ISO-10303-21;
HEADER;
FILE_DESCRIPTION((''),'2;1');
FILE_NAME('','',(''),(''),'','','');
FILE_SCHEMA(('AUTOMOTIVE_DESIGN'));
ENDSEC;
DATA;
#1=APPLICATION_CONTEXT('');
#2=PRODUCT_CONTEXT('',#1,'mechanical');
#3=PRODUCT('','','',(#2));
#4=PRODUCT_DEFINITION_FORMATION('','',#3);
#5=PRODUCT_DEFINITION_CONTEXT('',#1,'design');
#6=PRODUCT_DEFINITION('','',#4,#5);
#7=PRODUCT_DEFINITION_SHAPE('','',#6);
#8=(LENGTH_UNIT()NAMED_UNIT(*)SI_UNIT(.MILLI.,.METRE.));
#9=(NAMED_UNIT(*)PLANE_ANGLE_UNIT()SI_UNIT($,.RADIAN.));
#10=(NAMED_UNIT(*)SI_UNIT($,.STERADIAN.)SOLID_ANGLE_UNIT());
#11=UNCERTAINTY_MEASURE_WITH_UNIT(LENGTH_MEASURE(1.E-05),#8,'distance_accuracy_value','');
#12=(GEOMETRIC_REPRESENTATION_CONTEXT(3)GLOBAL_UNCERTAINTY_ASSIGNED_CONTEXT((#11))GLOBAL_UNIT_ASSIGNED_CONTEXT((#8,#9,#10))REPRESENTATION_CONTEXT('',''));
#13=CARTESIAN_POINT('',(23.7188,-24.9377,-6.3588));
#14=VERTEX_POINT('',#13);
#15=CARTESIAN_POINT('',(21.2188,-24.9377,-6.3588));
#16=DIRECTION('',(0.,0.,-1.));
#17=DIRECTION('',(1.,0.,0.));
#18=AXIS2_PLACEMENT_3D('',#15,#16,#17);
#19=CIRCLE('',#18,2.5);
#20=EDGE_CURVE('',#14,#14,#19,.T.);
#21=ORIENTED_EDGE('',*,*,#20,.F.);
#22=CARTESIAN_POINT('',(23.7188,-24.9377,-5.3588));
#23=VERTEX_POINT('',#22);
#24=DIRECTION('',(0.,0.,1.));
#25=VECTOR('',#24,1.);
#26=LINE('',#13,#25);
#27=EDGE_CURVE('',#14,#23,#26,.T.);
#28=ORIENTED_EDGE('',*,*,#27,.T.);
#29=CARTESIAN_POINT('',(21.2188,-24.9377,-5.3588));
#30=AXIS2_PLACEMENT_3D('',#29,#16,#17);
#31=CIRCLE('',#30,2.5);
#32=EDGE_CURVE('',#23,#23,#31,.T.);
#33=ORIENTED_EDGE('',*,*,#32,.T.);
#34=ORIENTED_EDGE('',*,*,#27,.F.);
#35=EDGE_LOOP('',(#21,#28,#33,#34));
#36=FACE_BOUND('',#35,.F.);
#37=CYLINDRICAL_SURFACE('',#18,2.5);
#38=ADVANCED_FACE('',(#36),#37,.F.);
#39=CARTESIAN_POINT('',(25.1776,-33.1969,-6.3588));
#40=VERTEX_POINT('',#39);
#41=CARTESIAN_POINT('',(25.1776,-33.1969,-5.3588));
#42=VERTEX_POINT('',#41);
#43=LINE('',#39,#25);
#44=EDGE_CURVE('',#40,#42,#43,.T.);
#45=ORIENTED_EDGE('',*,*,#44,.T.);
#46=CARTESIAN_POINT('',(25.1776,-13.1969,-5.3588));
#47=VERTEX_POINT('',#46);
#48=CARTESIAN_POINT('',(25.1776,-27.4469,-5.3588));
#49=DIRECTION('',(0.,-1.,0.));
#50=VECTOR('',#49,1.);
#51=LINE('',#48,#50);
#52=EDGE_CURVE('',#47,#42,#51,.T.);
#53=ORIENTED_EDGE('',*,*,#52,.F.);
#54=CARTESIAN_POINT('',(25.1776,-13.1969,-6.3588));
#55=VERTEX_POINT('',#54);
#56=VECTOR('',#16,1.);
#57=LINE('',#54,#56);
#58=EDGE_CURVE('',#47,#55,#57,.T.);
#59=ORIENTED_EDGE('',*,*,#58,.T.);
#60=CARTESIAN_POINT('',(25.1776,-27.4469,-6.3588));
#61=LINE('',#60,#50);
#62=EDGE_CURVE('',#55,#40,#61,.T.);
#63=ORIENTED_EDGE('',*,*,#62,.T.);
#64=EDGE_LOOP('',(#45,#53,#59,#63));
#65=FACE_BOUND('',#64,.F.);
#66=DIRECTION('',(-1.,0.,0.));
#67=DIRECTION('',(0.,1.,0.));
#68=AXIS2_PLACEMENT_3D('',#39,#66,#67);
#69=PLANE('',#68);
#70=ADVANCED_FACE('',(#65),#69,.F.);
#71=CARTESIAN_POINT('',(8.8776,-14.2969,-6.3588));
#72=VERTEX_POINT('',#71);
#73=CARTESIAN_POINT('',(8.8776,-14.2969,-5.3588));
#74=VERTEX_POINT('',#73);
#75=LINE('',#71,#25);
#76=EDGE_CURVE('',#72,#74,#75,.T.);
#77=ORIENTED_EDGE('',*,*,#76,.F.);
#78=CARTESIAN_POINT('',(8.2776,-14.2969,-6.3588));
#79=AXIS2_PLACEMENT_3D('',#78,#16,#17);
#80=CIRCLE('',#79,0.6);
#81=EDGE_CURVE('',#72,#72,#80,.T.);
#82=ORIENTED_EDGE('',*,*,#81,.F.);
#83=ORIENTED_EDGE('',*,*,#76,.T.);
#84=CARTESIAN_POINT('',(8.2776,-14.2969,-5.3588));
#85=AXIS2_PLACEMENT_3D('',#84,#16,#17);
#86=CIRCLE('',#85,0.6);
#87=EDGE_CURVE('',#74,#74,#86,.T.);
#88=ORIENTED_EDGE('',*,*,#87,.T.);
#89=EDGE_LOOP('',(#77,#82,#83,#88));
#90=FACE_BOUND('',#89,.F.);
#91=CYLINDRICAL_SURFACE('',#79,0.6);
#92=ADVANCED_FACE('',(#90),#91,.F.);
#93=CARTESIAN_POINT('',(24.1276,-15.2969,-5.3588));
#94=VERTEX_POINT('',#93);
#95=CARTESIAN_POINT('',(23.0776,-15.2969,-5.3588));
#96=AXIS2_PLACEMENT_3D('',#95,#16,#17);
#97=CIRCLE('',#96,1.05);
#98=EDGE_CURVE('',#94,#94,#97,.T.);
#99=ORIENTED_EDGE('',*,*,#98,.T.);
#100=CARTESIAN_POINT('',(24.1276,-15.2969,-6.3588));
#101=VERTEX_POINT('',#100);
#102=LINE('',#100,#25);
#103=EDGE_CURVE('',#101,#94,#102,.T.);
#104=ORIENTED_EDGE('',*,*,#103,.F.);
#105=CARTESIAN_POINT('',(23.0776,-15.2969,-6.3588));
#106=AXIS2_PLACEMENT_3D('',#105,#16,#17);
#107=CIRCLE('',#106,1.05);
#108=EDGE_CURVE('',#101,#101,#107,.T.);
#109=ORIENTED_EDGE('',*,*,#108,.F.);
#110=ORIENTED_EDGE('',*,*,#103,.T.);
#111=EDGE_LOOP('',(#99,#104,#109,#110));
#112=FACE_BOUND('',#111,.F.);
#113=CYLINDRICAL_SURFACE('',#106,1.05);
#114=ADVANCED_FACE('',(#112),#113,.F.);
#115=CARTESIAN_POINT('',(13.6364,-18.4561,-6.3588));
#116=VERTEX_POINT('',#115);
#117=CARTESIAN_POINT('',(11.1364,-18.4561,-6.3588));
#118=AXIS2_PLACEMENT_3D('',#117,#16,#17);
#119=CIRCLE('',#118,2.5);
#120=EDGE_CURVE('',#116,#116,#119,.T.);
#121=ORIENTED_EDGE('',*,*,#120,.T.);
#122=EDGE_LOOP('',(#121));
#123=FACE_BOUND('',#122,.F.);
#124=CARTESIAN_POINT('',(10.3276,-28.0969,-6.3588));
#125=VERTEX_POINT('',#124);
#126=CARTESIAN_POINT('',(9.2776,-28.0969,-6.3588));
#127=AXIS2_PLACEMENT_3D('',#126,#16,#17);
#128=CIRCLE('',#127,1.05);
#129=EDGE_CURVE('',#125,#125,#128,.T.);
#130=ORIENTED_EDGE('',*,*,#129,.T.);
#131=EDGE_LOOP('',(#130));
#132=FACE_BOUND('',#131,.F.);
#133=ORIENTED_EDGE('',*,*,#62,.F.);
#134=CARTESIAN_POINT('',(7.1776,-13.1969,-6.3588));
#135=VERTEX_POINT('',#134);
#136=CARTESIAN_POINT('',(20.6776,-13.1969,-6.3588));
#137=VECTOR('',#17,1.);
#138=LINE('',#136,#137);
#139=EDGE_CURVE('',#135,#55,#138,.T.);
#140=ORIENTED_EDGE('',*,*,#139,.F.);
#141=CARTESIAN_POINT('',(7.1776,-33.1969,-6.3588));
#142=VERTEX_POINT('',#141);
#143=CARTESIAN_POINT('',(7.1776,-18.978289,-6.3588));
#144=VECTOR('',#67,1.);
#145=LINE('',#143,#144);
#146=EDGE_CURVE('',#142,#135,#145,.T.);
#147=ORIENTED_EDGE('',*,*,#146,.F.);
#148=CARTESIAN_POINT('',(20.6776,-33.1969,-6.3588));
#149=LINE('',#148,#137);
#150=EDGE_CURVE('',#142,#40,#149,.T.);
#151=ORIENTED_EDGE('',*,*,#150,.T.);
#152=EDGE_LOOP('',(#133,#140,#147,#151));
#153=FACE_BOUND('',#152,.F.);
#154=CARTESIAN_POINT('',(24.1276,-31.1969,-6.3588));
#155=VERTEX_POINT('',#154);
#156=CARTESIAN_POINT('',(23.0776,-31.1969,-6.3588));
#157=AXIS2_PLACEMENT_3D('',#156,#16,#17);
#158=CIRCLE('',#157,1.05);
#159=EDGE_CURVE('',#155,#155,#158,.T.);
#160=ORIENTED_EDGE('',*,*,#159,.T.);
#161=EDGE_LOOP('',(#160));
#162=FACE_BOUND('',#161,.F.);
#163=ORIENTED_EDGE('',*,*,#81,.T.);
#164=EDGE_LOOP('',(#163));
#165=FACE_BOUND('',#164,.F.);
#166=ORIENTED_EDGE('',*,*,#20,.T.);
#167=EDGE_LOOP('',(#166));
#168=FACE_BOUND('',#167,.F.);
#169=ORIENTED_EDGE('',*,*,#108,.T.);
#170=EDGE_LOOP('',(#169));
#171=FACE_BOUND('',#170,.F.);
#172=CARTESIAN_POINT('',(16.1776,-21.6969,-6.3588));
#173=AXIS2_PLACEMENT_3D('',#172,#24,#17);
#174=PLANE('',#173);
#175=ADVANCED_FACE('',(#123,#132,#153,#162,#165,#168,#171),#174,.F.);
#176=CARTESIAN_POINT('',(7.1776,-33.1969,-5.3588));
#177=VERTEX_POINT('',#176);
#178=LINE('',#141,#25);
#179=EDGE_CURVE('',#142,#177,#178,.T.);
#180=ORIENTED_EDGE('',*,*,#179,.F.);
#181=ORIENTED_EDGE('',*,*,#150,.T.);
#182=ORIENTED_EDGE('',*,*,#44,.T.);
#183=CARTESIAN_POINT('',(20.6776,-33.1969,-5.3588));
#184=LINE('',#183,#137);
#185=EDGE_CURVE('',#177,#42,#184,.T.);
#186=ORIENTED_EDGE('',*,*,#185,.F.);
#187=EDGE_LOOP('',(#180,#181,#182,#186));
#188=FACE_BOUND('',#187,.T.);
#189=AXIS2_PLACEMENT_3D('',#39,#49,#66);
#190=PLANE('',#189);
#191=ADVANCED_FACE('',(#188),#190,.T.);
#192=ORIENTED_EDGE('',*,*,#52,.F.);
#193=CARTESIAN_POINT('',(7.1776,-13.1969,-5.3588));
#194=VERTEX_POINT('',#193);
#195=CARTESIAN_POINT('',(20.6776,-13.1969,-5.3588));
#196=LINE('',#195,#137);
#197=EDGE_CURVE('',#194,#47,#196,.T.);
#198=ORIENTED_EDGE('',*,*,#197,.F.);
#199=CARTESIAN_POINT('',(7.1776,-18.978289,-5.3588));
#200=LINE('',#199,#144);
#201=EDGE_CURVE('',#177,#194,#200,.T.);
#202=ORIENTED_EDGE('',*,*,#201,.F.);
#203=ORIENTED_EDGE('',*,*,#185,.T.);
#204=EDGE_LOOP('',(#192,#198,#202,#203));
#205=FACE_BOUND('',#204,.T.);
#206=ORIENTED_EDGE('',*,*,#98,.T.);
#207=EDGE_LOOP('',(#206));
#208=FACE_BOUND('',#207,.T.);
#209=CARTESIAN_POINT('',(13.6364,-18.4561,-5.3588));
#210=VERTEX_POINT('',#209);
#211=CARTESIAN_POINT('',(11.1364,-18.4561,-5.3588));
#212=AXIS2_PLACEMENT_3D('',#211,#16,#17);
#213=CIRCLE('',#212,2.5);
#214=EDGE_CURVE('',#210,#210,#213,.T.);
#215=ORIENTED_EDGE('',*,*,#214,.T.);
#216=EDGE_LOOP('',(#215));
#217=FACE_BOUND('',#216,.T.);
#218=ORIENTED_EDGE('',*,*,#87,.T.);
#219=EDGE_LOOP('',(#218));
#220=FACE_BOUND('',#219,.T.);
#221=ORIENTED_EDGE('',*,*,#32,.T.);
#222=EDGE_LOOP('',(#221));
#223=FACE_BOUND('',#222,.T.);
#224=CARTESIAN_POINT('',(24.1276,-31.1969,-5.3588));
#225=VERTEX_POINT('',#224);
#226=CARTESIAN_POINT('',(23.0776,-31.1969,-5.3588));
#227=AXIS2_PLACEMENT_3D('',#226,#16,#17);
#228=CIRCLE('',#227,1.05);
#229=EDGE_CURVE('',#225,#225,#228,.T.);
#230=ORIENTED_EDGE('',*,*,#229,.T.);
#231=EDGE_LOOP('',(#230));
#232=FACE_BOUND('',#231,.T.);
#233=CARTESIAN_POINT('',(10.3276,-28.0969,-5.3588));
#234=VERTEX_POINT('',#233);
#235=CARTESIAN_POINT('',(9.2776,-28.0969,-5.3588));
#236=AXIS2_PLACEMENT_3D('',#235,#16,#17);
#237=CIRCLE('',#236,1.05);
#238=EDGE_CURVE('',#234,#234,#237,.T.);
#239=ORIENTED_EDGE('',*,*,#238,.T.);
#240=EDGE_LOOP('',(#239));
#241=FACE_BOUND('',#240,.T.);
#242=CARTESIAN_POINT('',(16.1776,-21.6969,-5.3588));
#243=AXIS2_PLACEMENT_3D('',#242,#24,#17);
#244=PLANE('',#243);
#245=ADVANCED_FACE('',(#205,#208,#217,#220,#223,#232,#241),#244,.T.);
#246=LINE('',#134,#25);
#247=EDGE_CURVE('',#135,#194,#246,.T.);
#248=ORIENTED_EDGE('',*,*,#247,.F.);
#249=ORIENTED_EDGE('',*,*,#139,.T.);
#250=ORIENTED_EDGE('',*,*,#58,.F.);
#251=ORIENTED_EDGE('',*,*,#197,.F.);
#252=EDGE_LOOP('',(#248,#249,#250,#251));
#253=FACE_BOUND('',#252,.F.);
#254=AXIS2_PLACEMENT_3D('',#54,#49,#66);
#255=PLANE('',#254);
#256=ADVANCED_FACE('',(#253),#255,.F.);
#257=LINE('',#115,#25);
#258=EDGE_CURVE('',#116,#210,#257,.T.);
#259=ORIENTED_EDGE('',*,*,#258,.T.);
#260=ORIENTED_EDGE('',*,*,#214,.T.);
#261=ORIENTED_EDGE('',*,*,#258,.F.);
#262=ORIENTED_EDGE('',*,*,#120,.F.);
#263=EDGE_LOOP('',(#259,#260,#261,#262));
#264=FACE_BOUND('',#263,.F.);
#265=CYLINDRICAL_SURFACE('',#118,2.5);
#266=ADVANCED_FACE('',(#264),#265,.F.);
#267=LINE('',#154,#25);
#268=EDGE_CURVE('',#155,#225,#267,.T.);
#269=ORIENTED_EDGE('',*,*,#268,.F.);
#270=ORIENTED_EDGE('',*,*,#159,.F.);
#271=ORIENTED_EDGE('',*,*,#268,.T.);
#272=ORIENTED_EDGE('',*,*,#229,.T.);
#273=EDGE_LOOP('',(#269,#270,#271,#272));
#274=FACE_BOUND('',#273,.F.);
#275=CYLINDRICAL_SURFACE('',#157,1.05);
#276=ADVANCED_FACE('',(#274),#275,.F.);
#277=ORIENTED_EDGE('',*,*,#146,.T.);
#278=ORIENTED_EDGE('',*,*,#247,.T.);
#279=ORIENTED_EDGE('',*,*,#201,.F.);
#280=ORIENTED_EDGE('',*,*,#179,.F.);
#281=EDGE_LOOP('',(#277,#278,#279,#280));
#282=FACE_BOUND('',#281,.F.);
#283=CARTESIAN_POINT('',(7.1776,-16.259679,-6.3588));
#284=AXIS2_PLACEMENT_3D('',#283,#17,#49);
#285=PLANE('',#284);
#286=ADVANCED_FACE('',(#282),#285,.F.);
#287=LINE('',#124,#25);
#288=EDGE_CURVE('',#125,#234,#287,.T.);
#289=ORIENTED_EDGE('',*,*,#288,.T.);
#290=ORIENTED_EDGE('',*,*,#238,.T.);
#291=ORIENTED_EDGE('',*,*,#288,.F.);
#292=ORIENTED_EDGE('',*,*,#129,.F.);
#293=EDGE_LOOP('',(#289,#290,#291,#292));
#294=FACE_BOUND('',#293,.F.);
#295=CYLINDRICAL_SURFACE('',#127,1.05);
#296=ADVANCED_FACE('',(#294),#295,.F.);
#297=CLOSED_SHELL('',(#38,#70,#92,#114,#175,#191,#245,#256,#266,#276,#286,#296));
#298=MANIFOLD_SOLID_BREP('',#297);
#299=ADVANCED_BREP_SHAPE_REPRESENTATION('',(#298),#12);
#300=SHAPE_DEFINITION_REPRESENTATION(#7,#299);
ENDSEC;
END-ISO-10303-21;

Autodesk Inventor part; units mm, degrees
ref_plane "YZ Plane" through (0, 0, 0) normal (1, 0, 0) x (0, 1, 0)
ref_plane "XZ Plane" through (0, 0, 0) normal (0, 1, 0) x (-1, 0, 0)
ref_plane "Work Plane1" through (-8, -18, 2.25) normal (0, 0, 1) x (1, 0, 0)
ref_plane "Work Plane2" through (16.1776, -21.6969, -6.3588) normal (0, 0, 1) x (1, 0, 0)
sketch "Sketch6" plane through (16.1776, -21.6969, -6.3588) normal (0, 0, 1) x (1, 0, 0)
  circle A0 centre (6.9, -9.5) radius 1.2 projected
  circle A1 centre (-6.9, -6.4) radius 1.2 projected
  circle A2 centre (6.9, 6.4) radius 1.2 projected
  circle A3 centre (-7.9, 7.4) radius 0.4 projected
  line L0 (4.2, -7) -> (-1.2, -7) projected
  arc A4 (-8.5, 0.3) -> (-1.2, -7) centre (-1.2, 0.3) ccw projected
  line L1 (-8.5, 0.3) -> (-8.5, 2.7) projected
  arc A5 (-4.2, 7) -> (-8.5, 2.7) centre (-4.2, 2.7) ccw projected
  line L2 (-4.2, 7) -> (1.2, 7) projected
  arc A6 (8.5, -0.3) -> (1.2, 7) centre (1.2, -0.3) ccw projected
  line L3 (8.5, -0.3) -> (8.5, -2.7) projected
  arc A7 (4.2, -7) -> (8.5, -2.7) centre (4.2, -2.7) ccw projected
  line L4 (-4.2738, -7.5) -> (-4.2738, -24.5) projected
  line L5 (-4.2738, -7.5) -> (4.2738, -7.5) projected
  line L6 (4.2738, -24.5) -> (4.2738, -7.5) projected
  line L7 (9, -24.5) -> (4.2738, -24.5) projected
  line L8 (9, -24.5) -> (9, 8.5) projected
  line L9 (9, 8.5) -> (-9, 8.5) projected
  line L10 (-9, 8.5) -> (-9, -24.5) projected
  line L11 (-4.2738, -24.5) -> (-9, -24.5) projected
  line L12 (1.2, 6.2) -> (-4.2, 6.2) projected
  arc A8 (-4.2, 6.2) -> (-7.7, 2.7) centre (-4.2, 2.7) ccw projected
  line L13 (-7.7, 2.7) -> (-7.7, 0.3) projected
  arc A9 (-7.7, 0.3) -> (-1.2, -6.2) centre (-1.2, 0.3) ccw projected
  line L14 (-1.2, -6.2) -> (4.2, -6.2) projected
  arc A10 (4.2, -6.2) -> (7.7, -2.7) centre (4.2, -2.7) ccw projected
  line L15 (7.7, -2.7) -> (7.7, -0.3) projected
  arc A11 (7.7, -0.3) -> (1.2, 6.2) centre (1.2, -0.3) ccw projected
  line L16 (-7.2, 0.3) -> (-7.2, 2.7) projected
  arc A12 (-4.2, 5.7) -> (-7.2, 2.7) centre (-4.2, 2.7) ccw projected
  line L17 (-4.2, 5.7) -> (1.2, 5.7) projected
  arc A13 (7.2, -0.3) -> (1.2, 5.7) centre (1.2, -0.3) ccw projected
  line L18 (7.2, -0.3) -> (7.2, -2.7) projected
  arc A14 (4.2, -5.7) -> (7.2, -2.7) centre (4.2, -2.7) ccw projected
  line L19 (4.2, -5.7) -> (-1.2, -5.7) projected
  arc A15 (-7.2, 0.3) -> (-1.2, -5.7) centre (-1.2, 0.3) ccw projected
  line L20 (8.5, -0.3) -> (8.5, -2.7) projected
  arc A16 (8.5, -0.3) -> (1.2, 7) centre (1.2, -0.3) ccw projected
  line L21 (-4.2, 7) -> (1.2, 7) projected
  arc A17 (-4.2, 7) -> (-8.5, 2.7) centre (-4.2, 2.7) ccw projected
  line L22 (-8.5, 0.3) -> (-8.5, 2.7) projected
  arc A18 (-8.5, 0.3) -> (-1.2, -7) centre (-1.2, 0.3) ccw projected
  line L23 (4.2, -7) -> (-1.2, -7) projected
  arc A19 (4.2, -7) -> (8.5, -2.7) centre (4.2, -2.7) ccw projected
  arc A20 (-4.2, 6.2) -> (-7.7, 2.7) centre (-4.2, 2.7) ccw projected
  line L24 (1.2, 6.2) -> (-4.2, 6.2) projected
  arc A21 (7.7, -0.3) -> (1.2, 6.2) centre (1.2, -0.3) ccw projected
  line L25 (7.7, -2.7) -> (7.7, -0.3) projected
  arc A22 (4.2, -6.2) -> (7.7, -2.7) centre (4.2, -2.7) ccw projected
  line L26 (-1.2, -6.2) -> (4.2, -6.2) projected
  arc A23 (-7.7, 0.3) -> (-1.2, -6.2) centre (-1.2, 0.3) ccw projected
  line L27 (-7.7, 2.7) -> (-7.7, 0.3) projected
  line L28 (-1.4516, 1.7) -> (-0.5158, 1.7) projected
  arc A24 (2.07, 0.2211) -> (-0.5158, 1.7) centre (-0.5158, -1.3) ccw projected
  line L29 (2.07, 0.2211) -> (2.3135, -0.193) projected
  arc A25 (1.4516, -1.7) -> (2.3135, -0.193) centre (1.4516, -0.7) ccw projected
  line L30 (1.4516, -1.7) -> (0.5158, -1.7) projected
  arc A26 (-2.07, -0.2211) -> (0.5158, -1.7) centre (0.5158, 1.3) ccw projected
  line L31 (-2.07, -0.2211) -> (-2.3135, 0.193) projected
  arc A27 (-1.4516, 1.7) -> (-2.3135, 0.193) centre (-1.4516, 0.7) ccw projected
  arc A28 (-7.2, 0.3) -> (-1.2, -5.7) centre (-1.2, 0.3) ccw projected
  line L32 (-1.2, -5.7) -> (4.2, -5.7) projected
  arc A29 (4.2, -5.7) -> (7.2, -2.7) centre (4.2, -2.7) ccw projected
  line L33 (7.2, -2.7) -> (7.2, -0.3) projected
  arc A30 (7.2, -0.3) -> (1.2, 5.7) centre (1.2, -0.3) ccw projected
  line L34 (1.2, 5.7) -> (-4.2, 5.7) projected
  arc A31 (-4.2, 5.7) -> (-7.2, 2.7) centre (-4.2, 2.7) ccw projected
  line L35 (-7.2, 2.7) -> (-7.2, 0.3) projected
  line L36 (-9, 8.5) -> (9, 8.5)
  line L37 (9, 8.5) -> (9, -11.5)
  line L38 (9, -11.5) -> (-9, -11.5)
  line L39 (-9, -11.5) -> (-9, 8.5)
  circle A32 centre (-6.9, -6.4) radius 1.05
  circle A33 centre (6.9, -9.5) radius 1.05
  circle A34 centre (6.9, 6.4) radius 1.05
  circle A35 centre (-7.9, 7.4) radius 0.6
  circle A36 centre (-7.9, 7.4) radius 2.25
  line L40 (-4.2, 2.7) -> (4.2, -2.7)
  line L41 (-4.2, 2.7) -> (-5.0412, 3.2408)
  line L42 (4.2, -2.7) -> (5.0412, -3.2408)
  circle A37 centre (-5.0412, 3.2408) radius 2.5
  circle A38 centre (5.0412, -3.2408) radius 2.5
  point P0 (-16.1776, 21.6969)
  point P1 (-9, -11.5)
  dimension "d36" = 20
  dimension "d37" = 2.1
  dimension "d38" = 2.1
  dimension "d39" = 2.1
  dimension "d40" = 1.2
  dimension "d41" = 4.5
  dimension "d42" = 1
  dimension "d43" = 1
  dimension "d44" = 5
  dimension "d45" = 5
extrude "Extrusion4" add sketch "Sketch6" along normal blind 3 contours A0 | A1 | A2 | A7 L3 A6 L2 A5 A36 L9 L8 L38 L6 L5 L4 L10 L1 A4 L0 | L0 A4 L1 A5 A36 L2 A6 L3 A7 | A36 L10 L9 A5 | A5 A36 | L4 L5 L6 L38 | A11 L15 A10 A38 L18 A13 L17 A12 A37 A8 L12 | A37 L16 A15 L19 A14 A38 A10 L14 A9 L13 A8 | A12 L17 A13 L18 A38 L40 A25 L29 A24 L28 A27 A37 | A37 L40 A27 L31 A26 L30 A25 A38 A14 L19 A15 L16 | L40 A25 L30 A26 L31 A27 | A27 L28 A24 L29 A25 L40
move faces "Move2" translate (0, 0, -2) faces at (13.0665, -31.2809, -3.3588)
properties part number "water line connector"
